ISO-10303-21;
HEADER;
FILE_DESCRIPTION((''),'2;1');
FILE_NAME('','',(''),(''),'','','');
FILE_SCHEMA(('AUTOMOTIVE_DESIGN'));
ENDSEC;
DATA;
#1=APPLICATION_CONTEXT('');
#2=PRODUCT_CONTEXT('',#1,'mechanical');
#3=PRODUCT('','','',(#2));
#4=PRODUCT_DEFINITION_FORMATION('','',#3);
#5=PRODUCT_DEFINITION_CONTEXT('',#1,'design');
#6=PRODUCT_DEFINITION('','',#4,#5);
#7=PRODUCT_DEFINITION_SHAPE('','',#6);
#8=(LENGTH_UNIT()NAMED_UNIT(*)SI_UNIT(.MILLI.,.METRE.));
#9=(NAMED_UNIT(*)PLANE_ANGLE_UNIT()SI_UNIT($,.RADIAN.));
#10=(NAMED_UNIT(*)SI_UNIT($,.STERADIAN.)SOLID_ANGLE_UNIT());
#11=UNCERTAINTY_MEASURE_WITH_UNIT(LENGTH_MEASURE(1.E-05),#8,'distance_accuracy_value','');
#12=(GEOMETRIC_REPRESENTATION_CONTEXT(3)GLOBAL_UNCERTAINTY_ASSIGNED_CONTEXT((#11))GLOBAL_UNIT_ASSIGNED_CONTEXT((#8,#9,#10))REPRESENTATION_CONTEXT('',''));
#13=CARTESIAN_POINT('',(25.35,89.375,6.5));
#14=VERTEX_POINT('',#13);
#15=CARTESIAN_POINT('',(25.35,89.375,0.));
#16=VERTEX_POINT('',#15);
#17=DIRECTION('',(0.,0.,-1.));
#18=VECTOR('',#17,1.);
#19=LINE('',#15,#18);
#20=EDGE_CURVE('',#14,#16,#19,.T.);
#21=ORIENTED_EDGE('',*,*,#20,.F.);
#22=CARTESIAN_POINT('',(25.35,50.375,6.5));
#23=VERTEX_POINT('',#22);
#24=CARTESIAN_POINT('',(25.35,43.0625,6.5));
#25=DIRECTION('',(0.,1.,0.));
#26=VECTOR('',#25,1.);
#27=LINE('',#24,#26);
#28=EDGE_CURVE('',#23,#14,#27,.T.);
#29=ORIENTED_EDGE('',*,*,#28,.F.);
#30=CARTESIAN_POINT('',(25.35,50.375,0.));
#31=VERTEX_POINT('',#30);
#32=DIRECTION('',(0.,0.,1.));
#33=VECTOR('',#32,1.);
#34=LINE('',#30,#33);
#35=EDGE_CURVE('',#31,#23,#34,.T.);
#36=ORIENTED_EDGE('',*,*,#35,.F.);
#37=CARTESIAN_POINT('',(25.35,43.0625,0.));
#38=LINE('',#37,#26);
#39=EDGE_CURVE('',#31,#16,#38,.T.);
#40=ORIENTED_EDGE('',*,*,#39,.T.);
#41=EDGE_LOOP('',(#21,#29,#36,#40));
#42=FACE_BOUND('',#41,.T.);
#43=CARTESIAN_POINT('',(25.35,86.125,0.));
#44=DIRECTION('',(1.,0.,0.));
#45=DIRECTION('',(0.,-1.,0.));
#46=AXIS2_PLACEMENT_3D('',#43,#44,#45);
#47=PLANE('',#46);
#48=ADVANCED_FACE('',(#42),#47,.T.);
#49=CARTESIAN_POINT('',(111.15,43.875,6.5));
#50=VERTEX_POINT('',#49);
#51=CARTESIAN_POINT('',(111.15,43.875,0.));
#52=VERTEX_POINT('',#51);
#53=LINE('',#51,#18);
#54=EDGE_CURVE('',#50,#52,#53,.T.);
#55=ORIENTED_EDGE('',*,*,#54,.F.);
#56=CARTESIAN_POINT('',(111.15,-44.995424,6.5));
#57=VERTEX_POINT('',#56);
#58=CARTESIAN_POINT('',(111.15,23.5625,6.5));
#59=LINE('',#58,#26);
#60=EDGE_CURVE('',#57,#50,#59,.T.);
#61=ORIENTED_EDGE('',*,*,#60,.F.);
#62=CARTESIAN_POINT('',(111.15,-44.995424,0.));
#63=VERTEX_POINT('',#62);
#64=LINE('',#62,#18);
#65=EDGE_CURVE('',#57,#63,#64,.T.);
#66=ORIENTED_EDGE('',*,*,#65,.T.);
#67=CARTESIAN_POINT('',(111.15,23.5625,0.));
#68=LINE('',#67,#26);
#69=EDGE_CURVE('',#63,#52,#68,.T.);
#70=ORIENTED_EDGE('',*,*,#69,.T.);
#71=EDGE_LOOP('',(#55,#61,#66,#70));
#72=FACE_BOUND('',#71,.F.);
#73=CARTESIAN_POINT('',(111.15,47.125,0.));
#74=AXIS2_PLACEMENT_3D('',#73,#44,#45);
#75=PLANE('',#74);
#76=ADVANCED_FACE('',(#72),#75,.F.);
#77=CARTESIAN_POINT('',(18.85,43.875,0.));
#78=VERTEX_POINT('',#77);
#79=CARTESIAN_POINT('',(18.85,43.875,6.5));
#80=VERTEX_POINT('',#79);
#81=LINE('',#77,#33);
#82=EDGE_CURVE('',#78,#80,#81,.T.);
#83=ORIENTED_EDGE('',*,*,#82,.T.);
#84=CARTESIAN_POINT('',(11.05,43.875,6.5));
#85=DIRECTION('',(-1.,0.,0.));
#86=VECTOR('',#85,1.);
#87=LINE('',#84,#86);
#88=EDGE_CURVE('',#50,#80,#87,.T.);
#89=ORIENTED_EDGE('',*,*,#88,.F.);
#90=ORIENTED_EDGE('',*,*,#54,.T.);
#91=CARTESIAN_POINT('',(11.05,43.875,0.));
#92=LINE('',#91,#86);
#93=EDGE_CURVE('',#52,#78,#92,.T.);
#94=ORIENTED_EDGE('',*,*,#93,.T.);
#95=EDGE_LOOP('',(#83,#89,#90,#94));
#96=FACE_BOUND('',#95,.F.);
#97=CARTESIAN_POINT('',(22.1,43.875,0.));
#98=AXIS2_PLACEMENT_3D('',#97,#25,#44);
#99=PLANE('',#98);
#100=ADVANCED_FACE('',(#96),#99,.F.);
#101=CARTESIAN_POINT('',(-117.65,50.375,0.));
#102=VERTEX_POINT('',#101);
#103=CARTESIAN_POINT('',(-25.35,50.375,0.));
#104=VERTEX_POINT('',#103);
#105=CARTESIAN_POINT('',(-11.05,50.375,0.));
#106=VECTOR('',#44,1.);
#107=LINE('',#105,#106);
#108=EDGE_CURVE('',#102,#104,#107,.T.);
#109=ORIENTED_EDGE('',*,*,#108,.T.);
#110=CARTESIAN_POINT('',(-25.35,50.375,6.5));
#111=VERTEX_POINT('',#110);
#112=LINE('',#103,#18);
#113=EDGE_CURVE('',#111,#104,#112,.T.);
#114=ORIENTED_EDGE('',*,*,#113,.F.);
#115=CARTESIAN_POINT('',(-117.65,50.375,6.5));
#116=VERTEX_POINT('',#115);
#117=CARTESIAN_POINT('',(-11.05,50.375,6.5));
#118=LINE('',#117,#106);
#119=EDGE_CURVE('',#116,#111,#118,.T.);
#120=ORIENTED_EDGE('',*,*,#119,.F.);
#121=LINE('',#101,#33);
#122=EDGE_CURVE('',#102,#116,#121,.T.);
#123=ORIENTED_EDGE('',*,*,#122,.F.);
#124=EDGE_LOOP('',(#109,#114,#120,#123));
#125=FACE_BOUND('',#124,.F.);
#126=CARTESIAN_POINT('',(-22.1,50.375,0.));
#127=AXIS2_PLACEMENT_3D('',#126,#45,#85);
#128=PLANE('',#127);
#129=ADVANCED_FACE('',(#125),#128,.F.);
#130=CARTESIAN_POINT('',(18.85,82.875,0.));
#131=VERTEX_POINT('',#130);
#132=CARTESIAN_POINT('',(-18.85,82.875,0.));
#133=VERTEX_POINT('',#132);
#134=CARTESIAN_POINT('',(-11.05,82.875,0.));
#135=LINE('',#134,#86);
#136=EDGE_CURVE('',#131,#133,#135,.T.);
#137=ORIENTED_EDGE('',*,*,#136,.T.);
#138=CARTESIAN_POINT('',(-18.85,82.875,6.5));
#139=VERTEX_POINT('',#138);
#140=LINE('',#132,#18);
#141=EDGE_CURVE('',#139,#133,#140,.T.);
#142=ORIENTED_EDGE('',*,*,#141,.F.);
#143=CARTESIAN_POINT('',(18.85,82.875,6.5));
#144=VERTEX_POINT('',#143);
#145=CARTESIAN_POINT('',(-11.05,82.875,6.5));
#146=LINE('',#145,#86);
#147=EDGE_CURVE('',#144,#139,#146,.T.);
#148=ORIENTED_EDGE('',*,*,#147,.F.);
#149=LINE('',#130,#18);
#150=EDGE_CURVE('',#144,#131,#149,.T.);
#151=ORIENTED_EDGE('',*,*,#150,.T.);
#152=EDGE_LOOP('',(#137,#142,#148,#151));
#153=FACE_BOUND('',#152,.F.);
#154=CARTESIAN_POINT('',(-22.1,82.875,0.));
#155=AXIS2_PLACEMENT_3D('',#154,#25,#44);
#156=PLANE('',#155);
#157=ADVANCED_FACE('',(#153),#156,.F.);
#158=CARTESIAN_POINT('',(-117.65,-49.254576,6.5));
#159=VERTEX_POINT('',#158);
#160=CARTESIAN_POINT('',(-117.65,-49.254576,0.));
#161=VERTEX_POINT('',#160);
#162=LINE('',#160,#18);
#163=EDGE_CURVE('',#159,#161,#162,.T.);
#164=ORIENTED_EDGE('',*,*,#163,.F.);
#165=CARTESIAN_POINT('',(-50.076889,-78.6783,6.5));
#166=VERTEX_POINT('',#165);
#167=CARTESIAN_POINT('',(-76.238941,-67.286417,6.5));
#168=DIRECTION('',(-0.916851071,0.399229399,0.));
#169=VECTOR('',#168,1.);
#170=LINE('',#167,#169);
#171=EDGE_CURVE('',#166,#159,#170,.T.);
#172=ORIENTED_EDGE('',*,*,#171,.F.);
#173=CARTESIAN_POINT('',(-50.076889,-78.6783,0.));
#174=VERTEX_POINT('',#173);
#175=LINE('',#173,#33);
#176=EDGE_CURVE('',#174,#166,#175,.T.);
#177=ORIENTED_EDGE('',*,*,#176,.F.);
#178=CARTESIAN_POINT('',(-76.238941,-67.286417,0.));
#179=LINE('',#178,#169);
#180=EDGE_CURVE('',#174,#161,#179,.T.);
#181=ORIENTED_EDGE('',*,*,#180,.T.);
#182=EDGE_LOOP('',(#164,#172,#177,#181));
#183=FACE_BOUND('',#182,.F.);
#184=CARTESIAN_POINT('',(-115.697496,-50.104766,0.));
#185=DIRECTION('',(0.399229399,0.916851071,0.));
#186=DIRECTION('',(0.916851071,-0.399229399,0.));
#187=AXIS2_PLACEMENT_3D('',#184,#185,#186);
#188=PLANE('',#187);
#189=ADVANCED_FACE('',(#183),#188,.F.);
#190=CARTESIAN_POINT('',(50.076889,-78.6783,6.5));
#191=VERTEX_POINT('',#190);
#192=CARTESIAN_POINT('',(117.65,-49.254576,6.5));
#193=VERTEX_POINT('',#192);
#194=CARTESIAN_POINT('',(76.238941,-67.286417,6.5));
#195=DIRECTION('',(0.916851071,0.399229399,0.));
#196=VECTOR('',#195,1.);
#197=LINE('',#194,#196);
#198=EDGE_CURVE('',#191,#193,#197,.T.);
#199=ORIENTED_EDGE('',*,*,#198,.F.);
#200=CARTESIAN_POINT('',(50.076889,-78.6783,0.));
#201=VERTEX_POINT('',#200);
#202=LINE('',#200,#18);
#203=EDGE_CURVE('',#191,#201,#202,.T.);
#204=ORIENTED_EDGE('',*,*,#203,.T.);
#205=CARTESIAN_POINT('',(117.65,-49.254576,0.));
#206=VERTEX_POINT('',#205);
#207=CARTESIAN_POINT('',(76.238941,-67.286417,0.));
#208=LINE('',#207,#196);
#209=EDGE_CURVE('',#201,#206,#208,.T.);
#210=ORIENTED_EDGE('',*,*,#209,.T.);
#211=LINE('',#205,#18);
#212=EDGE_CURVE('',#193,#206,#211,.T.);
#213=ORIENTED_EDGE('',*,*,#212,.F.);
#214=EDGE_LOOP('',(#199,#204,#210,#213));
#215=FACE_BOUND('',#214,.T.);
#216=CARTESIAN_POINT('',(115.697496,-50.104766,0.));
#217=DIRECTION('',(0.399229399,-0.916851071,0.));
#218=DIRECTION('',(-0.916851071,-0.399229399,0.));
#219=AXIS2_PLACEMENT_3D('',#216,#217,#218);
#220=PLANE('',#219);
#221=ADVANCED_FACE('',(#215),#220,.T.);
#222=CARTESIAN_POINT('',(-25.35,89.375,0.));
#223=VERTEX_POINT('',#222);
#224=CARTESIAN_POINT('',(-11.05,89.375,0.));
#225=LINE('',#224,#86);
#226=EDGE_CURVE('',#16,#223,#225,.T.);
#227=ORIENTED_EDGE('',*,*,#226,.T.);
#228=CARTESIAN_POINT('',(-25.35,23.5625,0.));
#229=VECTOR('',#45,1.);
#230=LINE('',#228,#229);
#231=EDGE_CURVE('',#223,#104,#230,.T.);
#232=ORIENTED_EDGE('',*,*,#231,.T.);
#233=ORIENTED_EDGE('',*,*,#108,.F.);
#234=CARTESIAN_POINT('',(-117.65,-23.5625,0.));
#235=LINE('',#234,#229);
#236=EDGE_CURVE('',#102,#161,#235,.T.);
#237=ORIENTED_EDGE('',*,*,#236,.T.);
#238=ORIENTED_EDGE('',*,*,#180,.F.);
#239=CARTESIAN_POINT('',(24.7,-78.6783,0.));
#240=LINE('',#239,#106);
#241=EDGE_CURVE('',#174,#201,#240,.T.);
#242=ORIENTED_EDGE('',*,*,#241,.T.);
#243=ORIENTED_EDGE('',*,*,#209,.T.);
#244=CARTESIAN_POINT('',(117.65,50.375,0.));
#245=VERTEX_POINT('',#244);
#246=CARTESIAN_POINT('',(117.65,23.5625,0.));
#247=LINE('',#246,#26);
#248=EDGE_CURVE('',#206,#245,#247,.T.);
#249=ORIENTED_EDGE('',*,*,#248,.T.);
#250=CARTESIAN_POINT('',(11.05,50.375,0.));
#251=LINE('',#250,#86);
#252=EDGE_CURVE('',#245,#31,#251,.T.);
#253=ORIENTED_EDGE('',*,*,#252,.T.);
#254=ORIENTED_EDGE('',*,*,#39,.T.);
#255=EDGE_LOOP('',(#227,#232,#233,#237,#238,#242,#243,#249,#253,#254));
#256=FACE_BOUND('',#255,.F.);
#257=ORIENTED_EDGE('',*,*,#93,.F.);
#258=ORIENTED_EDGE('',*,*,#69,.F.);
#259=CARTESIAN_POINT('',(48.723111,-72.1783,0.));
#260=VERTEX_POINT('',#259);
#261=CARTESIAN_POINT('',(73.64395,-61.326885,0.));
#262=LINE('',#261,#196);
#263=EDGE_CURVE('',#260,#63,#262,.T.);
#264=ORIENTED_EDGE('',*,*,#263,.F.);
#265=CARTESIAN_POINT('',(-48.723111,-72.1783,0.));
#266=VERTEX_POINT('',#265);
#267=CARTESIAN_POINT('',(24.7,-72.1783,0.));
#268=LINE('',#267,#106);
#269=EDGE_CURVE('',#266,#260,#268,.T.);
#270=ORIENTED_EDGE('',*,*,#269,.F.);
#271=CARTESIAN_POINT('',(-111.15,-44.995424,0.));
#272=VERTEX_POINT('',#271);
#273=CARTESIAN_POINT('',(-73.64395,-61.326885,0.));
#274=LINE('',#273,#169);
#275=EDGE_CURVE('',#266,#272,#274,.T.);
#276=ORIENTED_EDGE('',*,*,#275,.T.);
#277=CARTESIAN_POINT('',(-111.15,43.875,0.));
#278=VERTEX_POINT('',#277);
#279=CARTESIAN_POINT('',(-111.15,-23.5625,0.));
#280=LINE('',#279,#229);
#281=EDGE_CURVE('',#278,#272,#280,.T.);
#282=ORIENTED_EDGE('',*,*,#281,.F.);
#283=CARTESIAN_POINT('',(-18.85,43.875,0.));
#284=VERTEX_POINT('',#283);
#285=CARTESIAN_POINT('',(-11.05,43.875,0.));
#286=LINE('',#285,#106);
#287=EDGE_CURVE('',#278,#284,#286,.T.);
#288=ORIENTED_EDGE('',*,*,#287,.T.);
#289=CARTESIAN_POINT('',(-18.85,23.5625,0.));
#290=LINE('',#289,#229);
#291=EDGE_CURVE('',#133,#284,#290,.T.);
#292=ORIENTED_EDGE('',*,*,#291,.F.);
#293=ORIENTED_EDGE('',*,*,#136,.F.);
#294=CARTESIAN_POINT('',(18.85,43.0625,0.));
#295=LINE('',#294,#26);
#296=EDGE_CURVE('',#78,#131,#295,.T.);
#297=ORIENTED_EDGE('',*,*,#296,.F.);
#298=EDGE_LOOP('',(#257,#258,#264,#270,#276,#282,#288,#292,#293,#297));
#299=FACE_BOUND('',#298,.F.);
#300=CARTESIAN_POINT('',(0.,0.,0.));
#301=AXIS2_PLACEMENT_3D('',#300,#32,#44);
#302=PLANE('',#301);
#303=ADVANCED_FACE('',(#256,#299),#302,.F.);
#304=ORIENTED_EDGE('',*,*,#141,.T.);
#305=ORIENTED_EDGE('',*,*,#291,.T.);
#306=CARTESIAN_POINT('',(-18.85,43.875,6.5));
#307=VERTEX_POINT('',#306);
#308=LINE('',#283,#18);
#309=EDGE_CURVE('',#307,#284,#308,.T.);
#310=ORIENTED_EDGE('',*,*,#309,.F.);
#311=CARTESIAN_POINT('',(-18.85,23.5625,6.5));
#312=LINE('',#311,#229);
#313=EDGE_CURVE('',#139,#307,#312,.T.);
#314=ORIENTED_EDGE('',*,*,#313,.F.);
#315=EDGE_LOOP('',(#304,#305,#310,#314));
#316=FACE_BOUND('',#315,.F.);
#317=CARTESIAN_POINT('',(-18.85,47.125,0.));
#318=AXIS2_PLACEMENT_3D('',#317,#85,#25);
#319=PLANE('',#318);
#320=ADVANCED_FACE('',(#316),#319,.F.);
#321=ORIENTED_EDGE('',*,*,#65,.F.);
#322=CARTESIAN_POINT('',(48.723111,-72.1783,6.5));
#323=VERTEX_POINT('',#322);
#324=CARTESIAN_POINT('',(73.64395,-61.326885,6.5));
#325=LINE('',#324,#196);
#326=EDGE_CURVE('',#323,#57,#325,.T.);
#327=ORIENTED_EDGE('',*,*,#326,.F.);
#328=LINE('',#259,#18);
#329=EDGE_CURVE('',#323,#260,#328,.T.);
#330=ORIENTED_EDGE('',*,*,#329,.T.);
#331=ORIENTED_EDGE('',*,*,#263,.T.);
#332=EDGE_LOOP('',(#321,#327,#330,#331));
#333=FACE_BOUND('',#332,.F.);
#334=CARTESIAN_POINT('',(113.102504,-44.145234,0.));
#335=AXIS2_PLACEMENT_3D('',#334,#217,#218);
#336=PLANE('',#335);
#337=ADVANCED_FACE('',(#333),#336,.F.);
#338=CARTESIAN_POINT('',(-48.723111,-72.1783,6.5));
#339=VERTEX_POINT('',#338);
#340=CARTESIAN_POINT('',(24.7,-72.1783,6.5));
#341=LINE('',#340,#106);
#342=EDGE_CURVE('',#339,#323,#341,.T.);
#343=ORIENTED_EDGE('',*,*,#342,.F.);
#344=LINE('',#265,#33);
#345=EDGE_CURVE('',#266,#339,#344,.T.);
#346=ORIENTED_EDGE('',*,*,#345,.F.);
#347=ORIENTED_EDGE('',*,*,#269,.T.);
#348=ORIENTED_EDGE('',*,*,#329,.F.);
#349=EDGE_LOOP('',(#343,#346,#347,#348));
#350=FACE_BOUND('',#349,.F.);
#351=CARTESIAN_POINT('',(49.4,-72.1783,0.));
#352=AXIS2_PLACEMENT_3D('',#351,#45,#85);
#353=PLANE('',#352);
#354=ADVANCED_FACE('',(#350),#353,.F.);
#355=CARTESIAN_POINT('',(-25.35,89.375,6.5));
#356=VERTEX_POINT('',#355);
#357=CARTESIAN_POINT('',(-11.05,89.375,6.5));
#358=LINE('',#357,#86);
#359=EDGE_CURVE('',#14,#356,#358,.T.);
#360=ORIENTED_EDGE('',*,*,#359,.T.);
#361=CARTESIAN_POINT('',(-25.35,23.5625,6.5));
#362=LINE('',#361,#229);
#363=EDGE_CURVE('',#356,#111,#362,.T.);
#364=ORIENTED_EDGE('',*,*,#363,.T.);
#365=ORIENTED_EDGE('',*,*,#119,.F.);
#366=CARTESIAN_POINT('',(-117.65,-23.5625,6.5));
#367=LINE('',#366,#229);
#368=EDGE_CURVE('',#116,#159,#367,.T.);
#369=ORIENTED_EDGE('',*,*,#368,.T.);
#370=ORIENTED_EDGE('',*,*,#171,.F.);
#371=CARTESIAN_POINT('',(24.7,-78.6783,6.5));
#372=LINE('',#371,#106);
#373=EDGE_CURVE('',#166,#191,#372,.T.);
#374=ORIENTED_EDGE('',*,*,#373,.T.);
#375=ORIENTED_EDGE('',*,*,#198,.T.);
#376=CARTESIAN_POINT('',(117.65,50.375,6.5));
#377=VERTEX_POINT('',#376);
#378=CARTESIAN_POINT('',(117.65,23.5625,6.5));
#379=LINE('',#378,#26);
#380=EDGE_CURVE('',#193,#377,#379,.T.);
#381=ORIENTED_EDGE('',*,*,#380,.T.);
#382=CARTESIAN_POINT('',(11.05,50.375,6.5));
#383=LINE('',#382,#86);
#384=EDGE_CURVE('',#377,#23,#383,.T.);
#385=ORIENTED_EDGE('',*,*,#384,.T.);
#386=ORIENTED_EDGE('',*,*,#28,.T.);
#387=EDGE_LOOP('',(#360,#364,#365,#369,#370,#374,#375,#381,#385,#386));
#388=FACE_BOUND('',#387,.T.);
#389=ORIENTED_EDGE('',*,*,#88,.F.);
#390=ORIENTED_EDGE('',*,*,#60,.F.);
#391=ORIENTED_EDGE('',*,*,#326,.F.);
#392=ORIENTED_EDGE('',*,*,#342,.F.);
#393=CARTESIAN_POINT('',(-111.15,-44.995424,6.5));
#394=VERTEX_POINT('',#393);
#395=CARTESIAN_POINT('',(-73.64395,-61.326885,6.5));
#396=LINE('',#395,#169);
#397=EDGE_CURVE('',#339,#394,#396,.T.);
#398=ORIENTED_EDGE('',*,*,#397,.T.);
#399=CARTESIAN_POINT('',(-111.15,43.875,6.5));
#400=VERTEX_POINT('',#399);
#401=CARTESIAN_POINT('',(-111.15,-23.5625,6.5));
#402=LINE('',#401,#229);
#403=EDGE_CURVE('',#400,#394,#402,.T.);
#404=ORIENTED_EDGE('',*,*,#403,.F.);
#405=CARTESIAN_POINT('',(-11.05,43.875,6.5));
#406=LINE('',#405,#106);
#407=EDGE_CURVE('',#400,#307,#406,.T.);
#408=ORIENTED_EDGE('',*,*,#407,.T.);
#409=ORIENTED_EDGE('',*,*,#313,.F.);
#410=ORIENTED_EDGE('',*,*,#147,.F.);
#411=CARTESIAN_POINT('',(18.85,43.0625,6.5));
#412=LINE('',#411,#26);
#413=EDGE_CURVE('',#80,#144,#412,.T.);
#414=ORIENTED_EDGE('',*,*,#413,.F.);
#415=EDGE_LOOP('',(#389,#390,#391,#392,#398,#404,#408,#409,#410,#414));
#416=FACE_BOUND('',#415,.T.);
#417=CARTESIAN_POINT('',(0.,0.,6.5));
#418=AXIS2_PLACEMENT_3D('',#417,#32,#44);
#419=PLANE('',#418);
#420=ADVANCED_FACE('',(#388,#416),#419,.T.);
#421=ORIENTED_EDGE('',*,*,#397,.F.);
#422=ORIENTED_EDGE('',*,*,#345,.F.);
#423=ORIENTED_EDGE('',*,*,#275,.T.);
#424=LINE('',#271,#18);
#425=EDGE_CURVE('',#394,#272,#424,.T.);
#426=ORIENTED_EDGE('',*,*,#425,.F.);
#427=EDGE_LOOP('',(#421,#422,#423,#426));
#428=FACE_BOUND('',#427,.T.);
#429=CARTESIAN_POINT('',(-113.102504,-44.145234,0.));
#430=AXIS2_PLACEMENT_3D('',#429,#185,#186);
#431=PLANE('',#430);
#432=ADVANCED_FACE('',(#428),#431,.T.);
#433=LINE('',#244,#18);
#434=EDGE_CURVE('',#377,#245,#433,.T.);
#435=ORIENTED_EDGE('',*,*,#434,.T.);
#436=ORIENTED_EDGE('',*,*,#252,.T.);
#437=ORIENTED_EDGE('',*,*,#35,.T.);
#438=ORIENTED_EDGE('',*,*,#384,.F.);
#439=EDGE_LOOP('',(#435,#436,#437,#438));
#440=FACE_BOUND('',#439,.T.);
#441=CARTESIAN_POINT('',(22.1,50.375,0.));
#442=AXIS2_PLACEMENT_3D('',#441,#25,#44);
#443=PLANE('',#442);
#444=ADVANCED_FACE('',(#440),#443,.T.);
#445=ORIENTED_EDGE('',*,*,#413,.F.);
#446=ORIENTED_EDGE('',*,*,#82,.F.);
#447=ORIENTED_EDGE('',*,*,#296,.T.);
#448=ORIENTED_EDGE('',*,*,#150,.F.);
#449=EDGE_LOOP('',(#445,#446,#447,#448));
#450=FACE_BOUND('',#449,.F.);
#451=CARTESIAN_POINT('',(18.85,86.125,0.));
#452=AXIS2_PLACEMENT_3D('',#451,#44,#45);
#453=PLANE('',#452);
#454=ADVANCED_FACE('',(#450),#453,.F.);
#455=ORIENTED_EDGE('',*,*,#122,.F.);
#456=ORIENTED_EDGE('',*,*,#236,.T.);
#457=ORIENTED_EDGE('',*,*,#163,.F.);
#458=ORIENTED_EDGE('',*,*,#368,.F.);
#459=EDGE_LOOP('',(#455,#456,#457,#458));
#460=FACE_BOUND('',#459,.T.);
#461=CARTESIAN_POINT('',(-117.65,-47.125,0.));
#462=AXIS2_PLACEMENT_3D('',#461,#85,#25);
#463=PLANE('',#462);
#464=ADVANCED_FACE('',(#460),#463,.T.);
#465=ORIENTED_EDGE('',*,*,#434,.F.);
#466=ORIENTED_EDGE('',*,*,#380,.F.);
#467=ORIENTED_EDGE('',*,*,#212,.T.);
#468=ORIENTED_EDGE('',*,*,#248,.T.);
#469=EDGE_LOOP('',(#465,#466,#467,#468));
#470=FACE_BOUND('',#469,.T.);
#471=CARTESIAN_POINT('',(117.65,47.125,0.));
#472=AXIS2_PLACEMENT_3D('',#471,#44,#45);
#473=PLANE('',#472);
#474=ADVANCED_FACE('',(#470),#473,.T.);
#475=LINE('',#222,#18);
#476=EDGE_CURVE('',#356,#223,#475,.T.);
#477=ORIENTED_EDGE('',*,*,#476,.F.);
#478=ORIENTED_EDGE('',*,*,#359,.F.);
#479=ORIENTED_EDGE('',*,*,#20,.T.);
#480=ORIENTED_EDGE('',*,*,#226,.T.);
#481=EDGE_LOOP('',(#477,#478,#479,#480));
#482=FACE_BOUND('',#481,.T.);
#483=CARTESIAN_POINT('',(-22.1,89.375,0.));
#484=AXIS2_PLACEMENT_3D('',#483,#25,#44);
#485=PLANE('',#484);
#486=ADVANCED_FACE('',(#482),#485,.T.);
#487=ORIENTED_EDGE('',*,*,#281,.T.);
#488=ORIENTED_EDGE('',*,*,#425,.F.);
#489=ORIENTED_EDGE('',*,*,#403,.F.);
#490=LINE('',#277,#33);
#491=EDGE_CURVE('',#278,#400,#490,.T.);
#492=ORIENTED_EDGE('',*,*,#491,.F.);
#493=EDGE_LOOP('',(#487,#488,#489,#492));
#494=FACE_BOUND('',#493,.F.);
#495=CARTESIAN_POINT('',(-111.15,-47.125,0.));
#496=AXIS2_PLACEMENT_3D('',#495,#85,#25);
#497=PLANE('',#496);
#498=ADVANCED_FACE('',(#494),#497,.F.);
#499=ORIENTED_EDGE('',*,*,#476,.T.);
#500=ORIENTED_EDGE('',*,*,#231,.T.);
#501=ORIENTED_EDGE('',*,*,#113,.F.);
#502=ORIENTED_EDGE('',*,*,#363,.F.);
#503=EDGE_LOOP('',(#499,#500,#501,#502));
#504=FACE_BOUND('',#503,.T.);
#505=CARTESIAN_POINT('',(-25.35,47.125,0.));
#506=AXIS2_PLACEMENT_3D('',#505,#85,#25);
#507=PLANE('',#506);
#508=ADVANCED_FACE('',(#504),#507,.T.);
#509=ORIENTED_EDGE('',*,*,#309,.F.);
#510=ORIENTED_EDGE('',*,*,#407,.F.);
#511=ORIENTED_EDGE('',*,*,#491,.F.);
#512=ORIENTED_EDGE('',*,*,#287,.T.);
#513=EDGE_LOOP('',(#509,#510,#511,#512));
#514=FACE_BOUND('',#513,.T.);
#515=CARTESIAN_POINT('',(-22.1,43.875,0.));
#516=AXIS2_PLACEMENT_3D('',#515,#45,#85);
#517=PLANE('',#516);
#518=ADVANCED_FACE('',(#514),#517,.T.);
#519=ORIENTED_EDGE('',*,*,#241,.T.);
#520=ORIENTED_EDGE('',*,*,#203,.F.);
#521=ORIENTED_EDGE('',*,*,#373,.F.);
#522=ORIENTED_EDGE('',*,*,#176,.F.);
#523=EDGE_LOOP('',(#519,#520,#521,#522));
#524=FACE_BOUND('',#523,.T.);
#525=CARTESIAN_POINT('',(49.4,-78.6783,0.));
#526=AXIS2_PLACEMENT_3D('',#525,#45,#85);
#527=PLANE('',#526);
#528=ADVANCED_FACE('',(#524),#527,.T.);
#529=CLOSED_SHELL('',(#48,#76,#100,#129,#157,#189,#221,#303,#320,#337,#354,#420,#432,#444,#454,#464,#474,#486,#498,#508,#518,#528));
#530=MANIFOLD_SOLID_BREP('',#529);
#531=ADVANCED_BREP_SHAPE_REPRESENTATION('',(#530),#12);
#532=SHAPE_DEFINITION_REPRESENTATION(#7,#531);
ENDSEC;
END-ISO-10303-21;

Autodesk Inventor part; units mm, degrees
ref_plane "YZ Plane" through (0, 0, 0) normal (1, 0, 0) x (0, 1, 0)
ref_plane "XZ Plane" through (0, 0, 0) normal (0, 1, 0) x (-1, 0, 0)
ref_plane "XY Plane" through (0, 0, 0) normal (0, 0, 1) x (1, 0, 0)
sketch "Sketch1" plane through (0, 0, 0) normal (0, 0, 1) x (1, 0, 0)
  line L0 (107.9, 41.925) -> (107.9, -41.925)
  line L1 (-107.9, -41.925) -> (-107.9, 41.925)
  line L2 (-107.9, 41.925) -> (107.9, -41.925) construction
  line L3 (107.9, 41.925) -> (-107.9, -41.925) construction
  line L4 (-15.6, 80.925) -> (15.6, 80.925)
  line L5 (-15.6, 41.925) -> (-107.9, 41.925)
  line L6 (15.6, 41.925) -> (107.9, 41.925)
  line L7 (-107.9, -41.925) -> (-49.4, -67.398)
  line L8 (107.9, -41.925) -> (49.4, -67.398)
  line L9 (49.4, -67.398) -> (-49.4, -67.398)
  line L10 (-114.4, -47.125) -> (-114.4, 47.125)
  line L11 (114.4, 47.125) -> (114.4, -47.125)
  line L12 (114.4, -47.125) -> (-114.4, 47.125) construction
  line L13 (-114.4, -47.125) -> (114.4, 47.125) construction
  line L14 (-22.1, 47.125) -> (-22.1, 86.125)
  line L15 (-22.1, 86.125) -> (22.1, 86.125)
  line L16 (22.1, 86.125) -> (22.1, 47.125)
  line L17 (22.1, 47.125) -> (114.4, 47.125)
  line L18 (-22.1, 47.125) -> (-114.4, 47.125)
  line L19 (114.4, -47.125) -> (49.4, -75.4283)
  line L20 (-114.4, -47.125) -> (-49.4, -75.4283)
  line L21 (49.4, -75.4283) -> (-49.4, -75.4283)
  line L22 (-15.6, 41.925) -> (-15.6, 80.925)
  line L23 (15.6, 41.925) -> (15.6, 80.925)
  point P0 (0, 0)
  point P1 (0, 0)
  point P2 (0, 80.925)
  point P3 (0, 0)
  point P4 (0, 86.125)
  point P5 (0, 0)
  dimension "Comp" = 215.8
  dimension "Lar" = 83.85
  dimension "Larg1" = 31.2
  dimension "d10" = 215.8
  dimension "d15" = 58.5
  dimension "d16" = 98.8
  dimension "d17" = 58.5
  dimension "LarMaior" = 94.25
  dimension "CompMaior" = 228.8
  dimension "d20" = 39
  dimension "d21" = 44.2
  dimension "d22" = 39
  dimension "d25" = 65
  dimension "d27" = 65
  dimension "d28" = 98.8
extrude "Extrusion1" add sketch "Sketch1" along normal blind 6.5 contours L0 L8 L9 L7 L1 L5 L22 L4 L23 L6 | L10 L18 L14 L15 L16 L17 L11 L19 L21 L20
shell "Shell1" thickness 6.5 both sides yes removed faces 2 at (-7.3667, -34.5772, 6.5) at (-7.3667, -34.5772, 0)
properties part number "Buste1"
